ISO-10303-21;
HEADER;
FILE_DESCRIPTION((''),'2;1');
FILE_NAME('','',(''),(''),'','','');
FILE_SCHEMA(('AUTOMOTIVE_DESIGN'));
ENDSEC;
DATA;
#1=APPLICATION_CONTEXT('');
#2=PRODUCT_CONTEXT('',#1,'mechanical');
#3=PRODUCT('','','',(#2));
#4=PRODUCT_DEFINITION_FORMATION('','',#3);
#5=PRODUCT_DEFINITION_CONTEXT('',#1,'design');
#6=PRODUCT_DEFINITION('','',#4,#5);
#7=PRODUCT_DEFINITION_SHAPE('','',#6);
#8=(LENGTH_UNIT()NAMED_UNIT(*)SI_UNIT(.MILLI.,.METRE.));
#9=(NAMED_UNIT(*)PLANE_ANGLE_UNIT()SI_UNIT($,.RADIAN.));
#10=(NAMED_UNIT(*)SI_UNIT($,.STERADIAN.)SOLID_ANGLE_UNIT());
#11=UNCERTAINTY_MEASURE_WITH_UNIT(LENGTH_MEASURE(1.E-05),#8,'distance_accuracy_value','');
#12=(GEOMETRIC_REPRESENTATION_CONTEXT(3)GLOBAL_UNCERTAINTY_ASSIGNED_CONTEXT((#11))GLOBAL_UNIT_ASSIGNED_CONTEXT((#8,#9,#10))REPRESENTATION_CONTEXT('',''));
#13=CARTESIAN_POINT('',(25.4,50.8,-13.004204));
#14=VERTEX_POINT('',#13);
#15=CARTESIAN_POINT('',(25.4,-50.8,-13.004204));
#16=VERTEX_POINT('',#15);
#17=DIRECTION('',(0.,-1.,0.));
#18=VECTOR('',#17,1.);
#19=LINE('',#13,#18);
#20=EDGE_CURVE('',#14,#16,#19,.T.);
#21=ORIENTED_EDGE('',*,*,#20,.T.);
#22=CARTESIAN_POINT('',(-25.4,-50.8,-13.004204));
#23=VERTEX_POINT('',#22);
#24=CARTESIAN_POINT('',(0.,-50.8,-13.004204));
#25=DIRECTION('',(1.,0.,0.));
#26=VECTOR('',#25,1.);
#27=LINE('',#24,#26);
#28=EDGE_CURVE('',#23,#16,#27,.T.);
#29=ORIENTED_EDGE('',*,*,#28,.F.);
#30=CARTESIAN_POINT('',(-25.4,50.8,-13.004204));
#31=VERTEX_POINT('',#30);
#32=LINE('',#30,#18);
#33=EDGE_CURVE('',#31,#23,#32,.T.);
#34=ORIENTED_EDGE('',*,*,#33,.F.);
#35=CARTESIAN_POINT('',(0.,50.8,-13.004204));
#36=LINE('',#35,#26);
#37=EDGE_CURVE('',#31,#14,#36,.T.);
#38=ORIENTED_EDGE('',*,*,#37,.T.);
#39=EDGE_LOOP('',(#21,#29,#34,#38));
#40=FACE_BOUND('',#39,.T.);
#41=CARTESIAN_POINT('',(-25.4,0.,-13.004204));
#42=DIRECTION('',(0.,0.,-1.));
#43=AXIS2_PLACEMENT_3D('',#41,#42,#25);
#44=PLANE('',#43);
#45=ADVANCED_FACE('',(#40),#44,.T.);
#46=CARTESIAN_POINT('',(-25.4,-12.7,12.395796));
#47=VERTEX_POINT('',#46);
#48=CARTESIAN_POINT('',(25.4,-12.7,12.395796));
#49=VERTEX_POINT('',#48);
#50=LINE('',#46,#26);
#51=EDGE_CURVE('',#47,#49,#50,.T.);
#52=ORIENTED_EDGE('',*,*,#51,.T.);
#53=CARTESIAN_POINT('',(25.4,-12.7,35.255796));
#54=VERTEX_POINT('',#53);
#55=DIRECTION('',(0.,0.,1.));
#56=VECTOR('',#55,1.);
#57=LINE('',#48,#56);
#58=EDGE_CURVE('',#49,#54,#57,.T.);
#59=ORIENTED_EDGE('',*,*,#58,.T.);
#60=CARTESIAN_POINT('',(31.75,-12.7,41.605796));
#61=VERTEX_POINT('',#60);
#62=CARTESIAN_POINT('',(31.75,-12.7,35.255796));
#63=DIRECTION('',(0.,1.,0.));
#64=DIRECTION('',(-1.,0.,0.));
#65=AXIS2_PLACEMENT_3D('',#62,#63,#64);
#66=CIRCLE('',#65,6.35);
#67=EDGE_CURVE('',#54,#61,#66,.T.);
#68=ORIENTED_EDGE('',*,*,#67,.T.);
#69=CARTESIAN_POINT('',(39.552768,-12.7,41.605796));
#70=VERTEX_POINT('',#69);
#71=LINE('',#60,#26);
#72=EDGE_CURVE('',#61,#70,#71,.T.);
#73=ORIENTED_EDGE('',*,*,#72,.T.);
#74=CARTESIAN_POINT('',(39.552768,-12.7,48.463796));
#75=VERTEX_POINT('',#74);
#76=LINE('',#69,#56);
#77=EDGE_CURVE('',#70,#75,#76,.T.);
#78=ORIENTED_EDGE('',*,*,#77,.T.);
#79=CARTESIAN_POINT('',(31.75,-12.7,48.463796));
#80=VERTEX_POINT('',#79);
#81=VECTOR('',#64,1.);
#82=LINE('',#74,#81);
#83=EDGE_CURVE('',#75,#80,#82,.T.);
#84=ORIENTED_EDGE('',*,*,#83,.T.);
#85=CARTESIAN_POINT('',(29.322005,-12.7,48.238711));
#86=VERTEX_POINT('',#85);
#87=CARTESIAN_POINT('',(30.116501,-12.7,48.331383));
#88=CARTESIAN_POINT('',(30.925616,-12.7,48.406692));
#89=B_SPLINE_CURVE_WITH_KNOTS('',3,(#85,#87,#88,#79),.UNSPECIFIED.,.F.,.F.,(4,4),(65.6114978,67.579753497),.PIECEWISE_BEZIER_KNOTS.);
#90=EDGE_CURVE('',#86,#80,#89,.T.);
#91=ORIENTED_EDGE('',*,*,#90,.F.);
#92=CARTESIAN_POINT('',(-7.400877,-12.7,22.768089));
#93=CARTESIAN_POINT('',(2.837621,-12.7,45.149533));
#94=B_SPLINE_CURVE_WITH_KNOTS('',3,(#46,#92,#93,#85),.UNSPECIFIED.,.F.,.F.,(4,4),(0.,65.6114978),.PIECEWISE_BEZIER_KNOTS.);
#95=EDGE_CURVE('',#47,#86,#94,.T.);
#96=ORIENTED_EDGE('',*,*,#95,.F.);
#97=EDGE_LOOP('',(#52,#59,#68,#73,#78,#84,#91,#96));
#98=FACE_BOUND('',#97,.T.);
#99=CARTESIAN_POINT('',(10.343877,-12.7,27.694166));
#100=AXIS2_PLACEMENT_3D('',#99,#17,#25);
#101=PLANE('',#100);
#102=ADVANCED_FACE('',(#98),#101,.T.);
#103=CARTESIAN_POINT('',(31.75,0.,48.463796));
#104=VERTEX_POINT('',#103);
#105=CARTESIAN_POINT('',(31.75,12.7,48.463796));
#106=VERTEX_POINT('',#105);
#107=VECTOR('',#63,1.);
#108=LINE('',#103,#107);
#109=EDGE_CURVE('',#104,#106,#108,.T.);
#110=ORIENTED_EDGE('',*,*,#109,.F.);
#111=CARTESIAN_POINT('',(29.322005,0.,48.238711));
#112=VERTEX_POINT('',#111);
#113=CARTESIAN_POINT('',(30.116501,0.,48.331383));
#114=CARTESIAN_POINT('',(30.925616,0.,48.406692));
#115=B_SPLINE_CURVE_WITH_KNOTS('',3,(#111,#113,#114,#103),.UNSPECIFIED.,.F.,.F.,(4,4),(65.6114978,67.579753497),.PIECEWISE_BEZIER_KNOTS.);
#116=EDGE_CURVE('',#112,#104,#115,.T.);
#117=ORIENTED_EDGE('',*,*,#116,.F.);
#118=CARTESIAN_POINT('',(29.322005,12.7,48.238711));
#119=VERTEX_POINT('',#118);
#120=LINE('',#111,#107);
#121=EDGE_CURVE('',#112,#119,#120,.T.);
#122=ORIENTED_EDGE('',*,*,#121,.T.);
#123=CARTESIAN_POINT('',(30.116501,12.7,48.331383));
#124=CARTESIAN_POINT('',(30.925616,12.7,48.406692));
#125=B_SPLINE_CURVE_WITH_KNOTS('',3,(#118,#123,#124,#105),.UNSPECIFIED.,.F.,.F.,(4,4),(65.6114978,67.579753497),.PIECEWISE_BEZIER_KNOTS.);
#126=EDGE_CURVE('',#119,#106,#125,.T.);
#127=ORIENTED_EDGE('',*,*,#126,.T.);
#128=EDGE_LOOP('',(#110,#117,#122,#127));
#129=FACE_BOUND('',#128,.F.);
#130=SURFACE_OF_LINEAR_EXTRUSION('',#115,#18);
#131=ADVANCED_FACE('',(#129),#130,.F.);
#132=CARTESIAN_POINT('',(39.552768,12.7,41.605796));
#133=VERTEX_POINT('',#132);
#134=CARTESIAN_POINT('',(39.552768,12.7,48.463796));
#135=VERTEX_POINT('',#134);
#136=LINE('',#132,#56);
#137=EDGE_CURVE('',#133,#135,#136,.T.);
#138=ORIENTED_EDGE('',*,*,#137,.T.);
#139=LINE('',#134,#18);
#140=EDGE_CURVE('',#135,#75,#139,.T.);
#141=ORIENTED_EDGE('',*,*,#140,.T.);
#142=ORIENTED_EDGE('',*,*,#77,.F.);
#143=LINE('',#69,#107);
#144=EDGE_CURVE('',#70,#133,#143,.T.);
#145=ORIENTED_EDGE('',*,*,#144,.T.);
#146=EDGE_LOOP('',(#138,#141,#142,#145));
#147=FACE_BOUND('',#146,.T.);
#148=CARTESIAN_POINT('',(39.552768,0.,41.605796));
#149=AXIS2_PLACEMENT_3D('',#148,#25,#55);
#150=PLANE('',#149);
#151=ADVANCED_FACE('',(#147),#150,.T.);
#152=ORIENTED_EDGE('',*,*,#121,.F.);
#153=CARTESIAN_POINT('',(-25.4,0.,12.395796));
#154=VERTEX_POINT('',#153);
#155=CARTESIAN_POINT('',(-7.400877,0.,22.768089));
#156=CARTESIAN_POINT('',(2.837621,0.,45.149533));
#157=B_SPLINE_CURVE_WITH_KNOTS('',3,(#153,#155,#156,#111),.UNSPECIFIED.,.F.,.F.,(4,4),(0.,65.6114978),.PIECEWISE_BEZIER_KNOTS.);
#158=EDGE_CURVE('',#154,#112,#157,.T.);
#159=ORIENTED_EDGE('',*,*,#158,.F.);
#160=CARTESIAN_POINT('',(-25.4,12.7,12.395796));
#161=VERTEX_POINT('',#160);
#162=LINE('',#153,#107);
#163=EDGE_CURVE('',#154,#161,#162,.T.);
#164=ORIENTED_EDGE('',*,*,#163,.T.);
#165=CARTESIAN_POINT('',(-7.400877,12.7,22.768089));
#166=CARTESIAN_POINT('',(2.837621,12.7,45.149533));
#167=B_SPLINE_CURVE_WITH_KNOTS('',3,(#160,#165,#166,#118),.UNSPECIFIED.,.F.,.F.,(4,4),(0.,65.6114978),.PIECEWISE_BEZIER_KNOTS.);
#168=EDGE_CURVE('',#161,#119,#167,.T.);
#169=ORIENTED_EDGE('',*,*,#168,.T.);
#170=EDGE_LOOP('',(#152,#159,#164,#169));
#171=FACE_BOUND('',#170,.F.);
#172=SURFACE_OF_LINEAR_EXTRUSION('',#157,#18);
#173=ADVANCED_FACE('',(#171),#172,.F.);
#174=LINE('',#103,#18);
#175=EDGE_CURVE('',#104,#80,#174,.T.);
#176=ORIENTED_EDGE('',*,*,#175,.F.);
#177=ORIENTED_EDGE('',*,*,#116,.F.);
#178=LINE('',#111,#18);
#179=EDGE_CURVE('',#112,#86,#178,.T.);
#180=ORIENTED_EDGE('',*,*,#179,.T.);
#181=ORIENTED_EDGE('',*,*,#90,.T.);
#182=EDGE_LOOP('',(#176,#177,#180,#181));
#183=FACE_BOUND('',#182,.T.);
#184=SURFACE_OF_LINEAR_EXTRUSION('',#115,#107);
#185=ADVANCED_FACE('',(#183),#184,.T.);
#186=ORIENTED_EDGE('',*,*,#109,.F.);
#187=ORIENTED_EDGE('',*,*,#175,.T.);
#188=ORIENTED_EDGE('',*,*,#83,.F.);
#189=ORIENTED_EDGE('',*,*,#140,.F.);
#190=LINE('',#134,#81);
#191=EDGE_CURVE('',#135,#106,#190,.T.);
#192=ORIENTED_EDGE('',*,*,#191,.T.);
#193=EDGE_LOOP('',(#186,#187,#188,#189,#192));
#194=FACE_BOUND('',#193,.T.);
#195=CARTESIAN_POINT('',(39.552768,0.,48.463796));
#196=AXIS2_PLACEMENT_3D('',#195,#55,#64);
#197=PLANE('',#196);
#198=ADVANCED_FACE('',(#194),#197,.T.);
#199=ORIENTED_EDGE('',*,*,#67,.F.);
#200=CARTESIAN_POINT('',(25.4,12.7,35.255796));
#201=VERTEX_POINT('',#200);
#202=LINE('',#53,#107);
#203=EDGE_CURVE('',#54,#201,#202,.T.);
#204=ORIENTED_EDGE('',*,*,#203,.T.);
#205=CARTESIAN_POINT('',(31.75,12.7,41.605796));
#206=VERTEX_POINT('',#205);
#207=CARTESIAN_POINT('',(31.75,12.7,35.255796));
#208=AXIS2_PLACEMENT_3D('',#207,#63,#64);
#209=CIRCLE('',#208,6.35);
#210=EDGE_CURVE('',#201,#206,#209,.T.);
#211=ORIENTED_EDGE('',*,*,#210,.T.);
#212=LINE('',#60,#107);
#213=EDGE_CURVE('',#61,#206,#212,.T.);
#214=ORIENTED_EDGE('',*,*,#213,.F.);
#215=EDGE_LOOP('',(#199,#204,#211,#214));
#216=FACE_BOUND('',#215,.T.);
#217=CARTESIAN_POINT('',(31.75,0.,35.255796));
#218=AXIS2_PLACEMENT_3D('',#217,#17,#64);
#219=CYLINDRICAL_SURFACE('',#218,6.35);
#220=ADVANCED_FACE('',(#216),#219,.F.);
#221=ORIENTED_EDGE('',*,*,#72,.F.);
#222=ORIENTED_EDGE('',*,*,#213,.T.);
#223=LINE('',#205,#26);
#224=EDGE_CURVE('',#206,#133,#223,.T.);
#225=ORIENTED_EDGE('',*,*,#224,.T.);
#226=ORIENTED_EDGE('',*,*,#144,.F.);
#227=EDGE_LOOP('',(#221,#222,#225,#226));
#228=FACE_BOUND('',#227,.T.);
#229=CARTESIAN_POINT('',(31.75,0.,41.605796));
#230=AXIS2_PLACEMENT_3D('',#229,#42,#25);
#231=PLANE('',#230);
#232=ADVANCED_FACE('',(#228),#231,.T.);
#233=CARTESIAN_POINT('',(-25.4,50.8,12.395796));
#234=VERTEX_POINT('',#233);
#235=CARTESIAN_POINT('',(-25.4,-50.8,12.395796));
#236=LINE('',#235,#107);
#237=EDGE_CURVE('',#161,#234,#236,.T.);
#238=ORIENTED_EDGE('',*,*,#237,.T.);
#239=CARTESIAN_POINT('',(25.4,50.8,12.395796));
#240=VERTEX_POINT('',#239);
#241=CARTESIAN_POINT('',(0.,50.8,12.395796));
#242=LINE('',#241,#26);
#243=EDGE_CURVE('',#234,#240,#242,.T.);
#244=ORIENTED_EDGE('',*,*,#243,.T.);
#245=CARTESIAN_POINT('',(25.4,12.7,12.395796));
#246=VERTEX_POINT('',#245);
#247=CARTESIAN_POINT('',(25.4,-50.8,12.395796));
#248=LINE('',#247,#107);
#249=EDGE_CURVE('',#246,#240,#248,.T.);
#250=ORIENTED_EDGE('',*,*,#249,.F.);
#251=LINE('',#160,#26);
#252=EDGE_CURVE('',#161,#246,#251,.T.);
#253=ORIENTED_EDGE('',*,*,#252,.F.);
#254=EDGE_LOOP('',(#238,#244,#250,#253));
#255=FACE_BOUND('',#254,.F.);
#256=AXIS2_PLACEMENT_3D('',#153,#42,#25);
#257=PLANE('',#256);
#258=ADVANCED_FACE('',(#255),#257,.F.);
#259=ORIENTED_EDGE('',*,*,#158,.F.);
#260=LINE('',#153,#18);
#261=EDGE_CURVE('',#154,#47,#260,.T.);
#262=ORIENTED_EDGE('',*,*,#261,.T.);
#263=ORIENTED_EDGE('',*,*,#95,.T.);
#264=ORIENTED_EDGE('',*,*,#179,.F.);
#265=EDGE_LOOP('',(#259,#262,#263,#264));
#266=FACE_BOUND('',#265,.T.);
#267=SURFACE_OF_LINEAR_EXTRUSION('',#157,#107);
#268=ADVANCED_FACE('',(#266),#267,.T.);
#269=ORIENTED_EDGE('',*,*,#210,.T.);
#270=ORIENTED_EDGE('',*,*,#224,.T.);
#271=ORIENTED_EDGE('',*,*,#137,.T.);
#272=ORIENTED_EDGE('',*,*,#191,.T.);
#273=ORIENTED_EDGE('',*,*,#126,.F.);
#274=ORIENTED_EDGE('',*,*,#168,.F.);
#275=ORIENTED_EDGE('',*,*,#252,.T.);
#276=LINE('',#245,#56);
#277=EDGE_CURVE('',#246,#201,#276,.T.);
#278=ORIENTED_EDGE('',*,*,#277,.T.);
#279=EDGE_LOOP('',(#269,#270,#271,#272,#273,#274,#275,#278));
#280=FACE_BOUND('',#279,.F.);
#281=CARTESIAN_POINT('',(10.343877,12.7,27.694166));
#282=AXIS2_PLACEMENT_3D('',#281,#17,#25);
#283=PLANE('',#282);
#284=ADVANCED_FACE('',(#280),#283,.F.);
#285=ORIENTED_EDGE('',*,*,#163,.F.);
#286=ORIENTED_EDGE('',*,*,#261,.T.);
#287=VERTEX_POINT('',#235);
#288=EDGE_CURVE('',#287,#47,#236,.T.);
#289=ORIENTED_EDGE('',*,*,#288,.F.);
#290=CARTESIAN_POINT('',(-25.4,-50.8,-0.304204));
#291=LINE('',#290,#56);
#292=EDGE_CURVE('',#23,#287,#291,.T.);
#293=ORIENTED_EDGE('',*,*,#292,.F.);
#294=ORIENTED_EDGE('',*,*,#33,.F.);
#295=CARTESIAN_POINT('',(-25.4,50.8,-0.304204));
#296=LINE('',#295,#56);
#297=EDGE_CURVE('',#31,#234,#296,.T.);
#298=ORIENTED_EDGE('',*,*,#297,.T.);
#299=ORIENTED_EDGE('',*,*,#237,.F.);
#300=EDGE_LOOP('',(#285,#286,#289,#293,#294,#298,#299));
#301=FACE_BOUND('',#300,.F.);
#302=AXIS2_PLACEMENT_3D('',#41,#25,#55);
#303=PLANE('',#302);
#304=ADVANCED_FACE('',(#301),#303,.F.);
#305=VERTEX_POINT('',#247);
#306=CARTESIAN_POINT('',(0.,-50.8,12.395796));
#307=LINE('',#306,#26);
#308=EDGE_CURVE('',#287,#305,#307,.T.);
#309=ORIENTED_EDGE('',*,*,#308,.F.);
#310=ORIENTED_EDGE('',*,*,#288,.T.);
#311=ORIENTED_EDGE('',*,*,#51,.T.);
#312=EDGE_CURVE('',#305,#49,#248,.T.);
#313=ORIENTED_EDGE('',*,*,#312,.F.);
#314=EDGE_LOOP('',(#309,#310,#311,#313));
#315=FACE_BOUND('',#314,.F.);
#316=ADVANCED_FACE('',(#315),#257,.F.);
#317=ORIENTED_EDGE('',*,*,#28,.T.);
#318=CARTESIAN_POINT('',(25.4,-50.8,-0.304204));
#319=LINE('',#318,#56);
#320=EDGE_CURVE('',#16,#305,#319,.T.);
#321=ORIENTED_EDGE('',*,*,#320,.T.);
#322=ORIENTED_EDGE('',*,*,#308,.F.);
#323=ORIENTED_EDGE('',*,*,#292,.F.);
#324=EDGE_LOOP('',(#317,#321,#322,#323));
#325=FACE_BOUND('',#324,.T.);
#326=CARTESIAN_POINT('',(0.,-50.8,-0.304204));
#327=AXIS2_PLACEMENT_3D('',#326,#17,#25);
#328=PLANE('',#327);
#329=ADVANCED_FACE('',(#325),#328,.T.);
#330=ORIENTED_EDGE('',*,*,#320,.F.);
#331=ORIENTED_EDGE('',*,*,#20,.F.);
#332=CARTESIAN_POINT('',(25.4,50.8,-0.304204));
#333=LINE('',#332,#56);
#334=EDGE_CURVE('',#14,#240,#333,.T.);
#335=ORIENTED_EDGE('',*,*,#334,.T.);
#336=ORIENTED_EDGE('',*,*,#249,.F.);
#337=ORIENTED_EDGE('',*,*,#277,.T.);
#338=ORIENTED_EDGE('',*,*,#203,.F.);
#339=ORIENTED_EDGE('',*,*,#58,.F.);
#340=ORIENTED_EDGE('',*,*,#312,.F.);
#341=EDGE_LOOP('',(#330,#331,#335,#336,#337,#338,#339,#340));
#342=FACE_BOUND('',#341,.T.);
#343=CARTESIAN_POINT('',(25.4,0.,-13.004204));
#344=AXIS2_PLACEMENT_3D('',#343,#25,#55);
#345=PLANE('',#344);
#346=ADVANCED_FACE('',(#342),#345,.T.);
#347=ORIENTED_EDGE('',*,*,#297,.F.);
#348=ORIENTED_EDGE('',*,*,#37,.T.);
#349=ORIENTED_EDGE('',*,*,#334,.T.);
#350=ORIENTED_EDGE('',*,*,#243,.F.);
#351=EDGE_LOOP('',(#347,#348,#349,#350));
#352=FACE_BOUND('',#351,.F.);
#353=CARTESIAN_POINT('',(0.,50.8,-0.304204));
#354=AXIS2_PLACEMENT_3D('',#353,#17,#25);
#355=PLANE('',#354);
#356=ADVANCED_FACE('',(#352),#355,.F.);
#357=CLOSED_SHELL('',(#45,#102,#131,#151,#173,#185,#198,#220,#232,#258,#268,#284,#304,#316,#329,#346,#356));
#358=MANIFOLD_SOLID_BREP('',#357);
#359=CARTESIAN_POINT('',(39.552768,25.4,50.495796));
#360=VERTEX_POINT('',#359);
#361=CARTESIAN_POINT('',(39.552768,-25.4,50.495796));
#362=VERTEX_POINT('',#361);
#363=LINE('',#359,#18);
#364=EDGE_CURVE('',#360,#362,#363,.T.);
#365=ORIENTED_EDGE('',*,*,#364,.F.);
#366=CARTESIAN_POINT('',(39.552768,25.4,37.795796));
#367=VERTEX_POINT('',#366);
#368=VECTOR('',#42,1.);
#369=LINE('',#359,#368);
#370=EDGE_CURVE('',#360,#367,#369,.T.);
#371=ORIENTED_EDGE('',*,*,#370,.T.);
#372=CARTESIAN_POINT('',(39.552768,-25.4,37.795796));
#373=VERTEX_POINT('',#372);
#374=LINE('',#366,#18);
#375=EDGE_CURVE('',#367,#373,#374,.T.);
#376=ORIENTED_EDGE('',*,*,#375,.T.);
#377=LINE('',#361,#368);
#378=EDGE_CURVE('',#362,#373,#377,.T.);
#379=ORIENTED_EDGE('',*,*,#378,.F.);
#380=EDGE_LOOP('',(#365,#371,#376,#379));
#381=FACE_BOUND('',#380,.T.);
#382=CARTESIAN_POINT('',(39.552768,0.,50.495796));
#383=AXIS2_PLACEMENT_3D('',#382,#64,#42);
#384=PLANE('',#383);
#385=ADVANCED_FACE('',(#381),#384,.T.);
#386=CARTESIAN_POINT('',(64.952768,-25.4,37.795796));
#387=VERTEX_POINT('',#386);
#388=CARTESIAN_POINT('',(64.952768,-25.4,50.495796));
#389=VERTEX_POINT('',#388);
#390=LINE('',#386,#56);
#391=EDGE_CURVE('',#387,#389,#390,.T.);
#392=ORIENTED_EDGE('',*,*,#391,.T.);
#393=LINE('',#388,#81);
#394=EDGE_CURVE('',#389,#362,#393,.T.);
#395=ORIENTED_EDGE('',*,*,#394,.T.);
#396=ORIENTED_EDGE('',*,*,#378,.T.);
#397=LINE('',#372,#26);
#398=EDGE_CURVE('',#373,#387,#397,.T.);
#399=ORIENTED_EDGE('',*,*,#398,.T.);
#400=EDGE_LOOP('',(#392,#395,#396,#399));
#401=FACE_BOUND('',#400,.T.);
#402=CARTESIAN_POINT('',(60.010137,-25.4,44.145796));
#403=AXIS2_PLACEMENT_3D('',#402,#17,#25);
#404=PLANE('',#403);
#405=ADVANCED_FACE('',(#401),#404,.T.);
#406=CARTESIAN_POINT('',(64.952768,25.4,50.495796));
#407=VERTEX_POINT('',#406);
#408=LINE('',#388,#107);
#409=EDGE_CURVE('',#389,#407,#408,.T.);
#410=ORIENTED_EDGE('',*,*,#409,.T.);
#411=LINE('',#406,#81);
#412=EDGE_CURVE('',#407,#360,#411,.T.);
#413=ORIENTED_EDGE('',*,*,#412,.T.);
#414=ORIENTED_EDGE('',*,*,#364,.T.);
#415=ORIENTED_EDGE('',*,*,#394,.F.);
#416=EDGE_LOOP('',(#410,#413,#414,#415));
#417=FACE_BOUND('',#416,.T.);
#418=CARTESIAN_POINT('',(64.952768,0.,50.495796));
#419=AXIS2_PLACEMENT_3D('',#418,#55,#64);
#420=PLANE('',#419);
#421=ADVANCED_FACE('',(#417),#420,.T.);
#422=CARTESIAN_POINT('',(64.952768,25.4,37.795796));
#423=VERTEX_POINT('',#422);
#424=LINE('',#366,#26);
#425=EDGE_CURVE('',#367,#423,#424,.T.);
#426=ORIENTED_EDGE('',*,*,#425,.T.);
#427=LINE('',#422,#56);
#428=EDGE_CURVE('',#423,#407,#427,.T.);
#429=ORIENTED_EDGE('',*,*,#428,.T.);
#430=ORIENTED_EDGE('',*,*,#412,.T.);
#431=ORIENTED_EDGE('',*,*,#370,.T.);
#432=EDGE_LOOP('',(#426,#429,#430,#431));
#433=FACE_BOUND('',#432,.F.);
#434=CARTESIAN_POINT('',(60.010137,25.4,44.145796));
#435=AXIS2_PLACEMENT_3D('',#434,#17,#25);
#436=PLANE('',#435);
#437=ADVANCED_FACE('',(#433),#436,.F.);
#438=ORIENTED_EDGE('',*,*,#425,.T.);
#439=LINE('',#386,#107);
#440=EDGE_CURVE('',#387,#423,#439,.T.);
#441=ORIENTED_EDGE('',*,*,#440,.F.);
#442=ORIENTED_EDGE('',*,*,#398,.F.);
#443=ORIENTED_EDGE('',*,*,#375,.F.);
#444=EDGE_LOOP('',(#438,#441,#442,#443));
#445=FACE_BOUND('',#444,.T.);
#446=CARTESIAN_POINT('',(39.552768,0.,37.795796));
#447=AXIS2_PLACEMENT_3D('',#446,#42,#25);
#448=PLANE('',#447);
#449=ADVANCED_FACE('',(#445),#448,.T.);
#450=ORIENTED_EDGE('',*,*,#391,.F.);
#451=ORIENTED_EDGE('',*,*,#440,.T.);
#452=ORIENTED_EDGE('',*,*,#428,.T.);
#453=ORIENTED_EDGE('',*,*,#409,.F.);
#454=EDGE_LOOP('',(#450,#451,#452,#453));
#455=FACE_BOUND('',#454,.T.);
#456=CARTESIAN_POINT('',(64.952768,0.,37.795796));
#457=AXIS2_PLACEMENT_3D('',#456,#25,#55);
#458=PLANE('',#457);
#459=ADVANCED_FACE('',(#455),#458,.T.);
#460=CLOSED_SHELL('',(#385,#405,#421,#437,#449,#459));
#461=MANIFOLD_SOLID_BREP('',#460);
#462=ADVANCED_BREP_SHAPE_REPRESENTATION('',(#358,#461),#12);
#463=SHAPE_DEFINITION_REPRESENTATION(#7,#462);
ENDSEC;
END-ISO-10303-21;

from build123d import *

# Parameters (mm, degrees)
F0_W     = 50.8
F0_H     = 25.4
F1_DEPTH = 50.8
F0_W_2   = 15.5147364107
F0_H_2   = 3.81
F0_H_3   = 2.0320005715
F0_H_4   = 6.8579994285
F2_DEPTH = 25.4
F3_DEPTH = 12.7


with BuildPart() as f1:
    # F0 (on Front) → F1 (new body, symmetric)
    with BuildSketch(Plane.XZ):
        with Locations((0, -0.3042038961)):
            Rectangle(F0_W, F0_H)
    extrude(amount=F1_DEPTH, both=True)

    # F0 (on Front) → F3 (join, symmetric)
    with BuildSketch(Plane.XZ):
        with BuildLine():
            Line((39.5527683854, 41.6057961039), (39.5527683854, 48.4637955324))
            Line((39.5527683854, 48.4637955324), (31.75, 48.4637955324))
            add(Edge.make_bspline(
                [(29.3220054539, 48.2387114694), (30.116500968, 48.3313826288), (30.9256164541, 48.4066923242), (31.75, 48.4637955324)],
                knots=[65.6114978001, 65.6114978001, 65.6114978001, 65.6114978001, 67.5797534974, 67.5797534974, 67.5797534974, 67.5797534974], degree=3))
            add(Edge.make_bspline(
                [(-25.4, 12.3957961039), (-7.4008771224, 22.7680893729), (2.8376209581, 45.1495327735), (29.3220054539, 48.2387114694)],
                knots=[0, 0, 0, 0, 65.6114978001, 65.6114978001, 65.6114978001, 65.6114978001], degree=3))
            Line((-25.4, 12.3957961039), (25.4, 12.3957961039))
            Line((25.4, 12.3957961039), (25.4, 35.2557961039))
            ThreePointArc((25.4, 35.2557961039), (27.2598719395, 39.7459241644), (31.75, 41.6057961039))
            Line((31.75, 41.6057961039), (39.5527683854, 41.6057961039))
        make_face()
    extrude(amount=F3_DEPTH, both=True)


with BuildPart() as f2:
    # F0 (on Front) → F2 (new body, symmetric)
    with BuildSketch(Plane.XZ):
        Polygon((64.9527683854, 50.4957961039), (55.0675047961, 50.4957961039), (55.0675047961, 48.4637955324), (55.0675047961, 41.6057961039), (55.0675047961, 37.7957961039), (64.9527683854, 37.7957961039), align=None)
        with Locations((47.3101365908, 39.7007961039)):
            Rectangle(F0_W_2, F0_H_2)
        with Locations((47.3101365908, 49.4797958182)):
            Rectangle(F0_W_2, F0_H_3)
        with Locations((47.3101365908, 45.0347958182)):
            Rectangle(F0_W_2, F0_H_4)
    extrude(amount=F2_DEPTH, both=True)


solid = Compound([f1.part, f2.part])
